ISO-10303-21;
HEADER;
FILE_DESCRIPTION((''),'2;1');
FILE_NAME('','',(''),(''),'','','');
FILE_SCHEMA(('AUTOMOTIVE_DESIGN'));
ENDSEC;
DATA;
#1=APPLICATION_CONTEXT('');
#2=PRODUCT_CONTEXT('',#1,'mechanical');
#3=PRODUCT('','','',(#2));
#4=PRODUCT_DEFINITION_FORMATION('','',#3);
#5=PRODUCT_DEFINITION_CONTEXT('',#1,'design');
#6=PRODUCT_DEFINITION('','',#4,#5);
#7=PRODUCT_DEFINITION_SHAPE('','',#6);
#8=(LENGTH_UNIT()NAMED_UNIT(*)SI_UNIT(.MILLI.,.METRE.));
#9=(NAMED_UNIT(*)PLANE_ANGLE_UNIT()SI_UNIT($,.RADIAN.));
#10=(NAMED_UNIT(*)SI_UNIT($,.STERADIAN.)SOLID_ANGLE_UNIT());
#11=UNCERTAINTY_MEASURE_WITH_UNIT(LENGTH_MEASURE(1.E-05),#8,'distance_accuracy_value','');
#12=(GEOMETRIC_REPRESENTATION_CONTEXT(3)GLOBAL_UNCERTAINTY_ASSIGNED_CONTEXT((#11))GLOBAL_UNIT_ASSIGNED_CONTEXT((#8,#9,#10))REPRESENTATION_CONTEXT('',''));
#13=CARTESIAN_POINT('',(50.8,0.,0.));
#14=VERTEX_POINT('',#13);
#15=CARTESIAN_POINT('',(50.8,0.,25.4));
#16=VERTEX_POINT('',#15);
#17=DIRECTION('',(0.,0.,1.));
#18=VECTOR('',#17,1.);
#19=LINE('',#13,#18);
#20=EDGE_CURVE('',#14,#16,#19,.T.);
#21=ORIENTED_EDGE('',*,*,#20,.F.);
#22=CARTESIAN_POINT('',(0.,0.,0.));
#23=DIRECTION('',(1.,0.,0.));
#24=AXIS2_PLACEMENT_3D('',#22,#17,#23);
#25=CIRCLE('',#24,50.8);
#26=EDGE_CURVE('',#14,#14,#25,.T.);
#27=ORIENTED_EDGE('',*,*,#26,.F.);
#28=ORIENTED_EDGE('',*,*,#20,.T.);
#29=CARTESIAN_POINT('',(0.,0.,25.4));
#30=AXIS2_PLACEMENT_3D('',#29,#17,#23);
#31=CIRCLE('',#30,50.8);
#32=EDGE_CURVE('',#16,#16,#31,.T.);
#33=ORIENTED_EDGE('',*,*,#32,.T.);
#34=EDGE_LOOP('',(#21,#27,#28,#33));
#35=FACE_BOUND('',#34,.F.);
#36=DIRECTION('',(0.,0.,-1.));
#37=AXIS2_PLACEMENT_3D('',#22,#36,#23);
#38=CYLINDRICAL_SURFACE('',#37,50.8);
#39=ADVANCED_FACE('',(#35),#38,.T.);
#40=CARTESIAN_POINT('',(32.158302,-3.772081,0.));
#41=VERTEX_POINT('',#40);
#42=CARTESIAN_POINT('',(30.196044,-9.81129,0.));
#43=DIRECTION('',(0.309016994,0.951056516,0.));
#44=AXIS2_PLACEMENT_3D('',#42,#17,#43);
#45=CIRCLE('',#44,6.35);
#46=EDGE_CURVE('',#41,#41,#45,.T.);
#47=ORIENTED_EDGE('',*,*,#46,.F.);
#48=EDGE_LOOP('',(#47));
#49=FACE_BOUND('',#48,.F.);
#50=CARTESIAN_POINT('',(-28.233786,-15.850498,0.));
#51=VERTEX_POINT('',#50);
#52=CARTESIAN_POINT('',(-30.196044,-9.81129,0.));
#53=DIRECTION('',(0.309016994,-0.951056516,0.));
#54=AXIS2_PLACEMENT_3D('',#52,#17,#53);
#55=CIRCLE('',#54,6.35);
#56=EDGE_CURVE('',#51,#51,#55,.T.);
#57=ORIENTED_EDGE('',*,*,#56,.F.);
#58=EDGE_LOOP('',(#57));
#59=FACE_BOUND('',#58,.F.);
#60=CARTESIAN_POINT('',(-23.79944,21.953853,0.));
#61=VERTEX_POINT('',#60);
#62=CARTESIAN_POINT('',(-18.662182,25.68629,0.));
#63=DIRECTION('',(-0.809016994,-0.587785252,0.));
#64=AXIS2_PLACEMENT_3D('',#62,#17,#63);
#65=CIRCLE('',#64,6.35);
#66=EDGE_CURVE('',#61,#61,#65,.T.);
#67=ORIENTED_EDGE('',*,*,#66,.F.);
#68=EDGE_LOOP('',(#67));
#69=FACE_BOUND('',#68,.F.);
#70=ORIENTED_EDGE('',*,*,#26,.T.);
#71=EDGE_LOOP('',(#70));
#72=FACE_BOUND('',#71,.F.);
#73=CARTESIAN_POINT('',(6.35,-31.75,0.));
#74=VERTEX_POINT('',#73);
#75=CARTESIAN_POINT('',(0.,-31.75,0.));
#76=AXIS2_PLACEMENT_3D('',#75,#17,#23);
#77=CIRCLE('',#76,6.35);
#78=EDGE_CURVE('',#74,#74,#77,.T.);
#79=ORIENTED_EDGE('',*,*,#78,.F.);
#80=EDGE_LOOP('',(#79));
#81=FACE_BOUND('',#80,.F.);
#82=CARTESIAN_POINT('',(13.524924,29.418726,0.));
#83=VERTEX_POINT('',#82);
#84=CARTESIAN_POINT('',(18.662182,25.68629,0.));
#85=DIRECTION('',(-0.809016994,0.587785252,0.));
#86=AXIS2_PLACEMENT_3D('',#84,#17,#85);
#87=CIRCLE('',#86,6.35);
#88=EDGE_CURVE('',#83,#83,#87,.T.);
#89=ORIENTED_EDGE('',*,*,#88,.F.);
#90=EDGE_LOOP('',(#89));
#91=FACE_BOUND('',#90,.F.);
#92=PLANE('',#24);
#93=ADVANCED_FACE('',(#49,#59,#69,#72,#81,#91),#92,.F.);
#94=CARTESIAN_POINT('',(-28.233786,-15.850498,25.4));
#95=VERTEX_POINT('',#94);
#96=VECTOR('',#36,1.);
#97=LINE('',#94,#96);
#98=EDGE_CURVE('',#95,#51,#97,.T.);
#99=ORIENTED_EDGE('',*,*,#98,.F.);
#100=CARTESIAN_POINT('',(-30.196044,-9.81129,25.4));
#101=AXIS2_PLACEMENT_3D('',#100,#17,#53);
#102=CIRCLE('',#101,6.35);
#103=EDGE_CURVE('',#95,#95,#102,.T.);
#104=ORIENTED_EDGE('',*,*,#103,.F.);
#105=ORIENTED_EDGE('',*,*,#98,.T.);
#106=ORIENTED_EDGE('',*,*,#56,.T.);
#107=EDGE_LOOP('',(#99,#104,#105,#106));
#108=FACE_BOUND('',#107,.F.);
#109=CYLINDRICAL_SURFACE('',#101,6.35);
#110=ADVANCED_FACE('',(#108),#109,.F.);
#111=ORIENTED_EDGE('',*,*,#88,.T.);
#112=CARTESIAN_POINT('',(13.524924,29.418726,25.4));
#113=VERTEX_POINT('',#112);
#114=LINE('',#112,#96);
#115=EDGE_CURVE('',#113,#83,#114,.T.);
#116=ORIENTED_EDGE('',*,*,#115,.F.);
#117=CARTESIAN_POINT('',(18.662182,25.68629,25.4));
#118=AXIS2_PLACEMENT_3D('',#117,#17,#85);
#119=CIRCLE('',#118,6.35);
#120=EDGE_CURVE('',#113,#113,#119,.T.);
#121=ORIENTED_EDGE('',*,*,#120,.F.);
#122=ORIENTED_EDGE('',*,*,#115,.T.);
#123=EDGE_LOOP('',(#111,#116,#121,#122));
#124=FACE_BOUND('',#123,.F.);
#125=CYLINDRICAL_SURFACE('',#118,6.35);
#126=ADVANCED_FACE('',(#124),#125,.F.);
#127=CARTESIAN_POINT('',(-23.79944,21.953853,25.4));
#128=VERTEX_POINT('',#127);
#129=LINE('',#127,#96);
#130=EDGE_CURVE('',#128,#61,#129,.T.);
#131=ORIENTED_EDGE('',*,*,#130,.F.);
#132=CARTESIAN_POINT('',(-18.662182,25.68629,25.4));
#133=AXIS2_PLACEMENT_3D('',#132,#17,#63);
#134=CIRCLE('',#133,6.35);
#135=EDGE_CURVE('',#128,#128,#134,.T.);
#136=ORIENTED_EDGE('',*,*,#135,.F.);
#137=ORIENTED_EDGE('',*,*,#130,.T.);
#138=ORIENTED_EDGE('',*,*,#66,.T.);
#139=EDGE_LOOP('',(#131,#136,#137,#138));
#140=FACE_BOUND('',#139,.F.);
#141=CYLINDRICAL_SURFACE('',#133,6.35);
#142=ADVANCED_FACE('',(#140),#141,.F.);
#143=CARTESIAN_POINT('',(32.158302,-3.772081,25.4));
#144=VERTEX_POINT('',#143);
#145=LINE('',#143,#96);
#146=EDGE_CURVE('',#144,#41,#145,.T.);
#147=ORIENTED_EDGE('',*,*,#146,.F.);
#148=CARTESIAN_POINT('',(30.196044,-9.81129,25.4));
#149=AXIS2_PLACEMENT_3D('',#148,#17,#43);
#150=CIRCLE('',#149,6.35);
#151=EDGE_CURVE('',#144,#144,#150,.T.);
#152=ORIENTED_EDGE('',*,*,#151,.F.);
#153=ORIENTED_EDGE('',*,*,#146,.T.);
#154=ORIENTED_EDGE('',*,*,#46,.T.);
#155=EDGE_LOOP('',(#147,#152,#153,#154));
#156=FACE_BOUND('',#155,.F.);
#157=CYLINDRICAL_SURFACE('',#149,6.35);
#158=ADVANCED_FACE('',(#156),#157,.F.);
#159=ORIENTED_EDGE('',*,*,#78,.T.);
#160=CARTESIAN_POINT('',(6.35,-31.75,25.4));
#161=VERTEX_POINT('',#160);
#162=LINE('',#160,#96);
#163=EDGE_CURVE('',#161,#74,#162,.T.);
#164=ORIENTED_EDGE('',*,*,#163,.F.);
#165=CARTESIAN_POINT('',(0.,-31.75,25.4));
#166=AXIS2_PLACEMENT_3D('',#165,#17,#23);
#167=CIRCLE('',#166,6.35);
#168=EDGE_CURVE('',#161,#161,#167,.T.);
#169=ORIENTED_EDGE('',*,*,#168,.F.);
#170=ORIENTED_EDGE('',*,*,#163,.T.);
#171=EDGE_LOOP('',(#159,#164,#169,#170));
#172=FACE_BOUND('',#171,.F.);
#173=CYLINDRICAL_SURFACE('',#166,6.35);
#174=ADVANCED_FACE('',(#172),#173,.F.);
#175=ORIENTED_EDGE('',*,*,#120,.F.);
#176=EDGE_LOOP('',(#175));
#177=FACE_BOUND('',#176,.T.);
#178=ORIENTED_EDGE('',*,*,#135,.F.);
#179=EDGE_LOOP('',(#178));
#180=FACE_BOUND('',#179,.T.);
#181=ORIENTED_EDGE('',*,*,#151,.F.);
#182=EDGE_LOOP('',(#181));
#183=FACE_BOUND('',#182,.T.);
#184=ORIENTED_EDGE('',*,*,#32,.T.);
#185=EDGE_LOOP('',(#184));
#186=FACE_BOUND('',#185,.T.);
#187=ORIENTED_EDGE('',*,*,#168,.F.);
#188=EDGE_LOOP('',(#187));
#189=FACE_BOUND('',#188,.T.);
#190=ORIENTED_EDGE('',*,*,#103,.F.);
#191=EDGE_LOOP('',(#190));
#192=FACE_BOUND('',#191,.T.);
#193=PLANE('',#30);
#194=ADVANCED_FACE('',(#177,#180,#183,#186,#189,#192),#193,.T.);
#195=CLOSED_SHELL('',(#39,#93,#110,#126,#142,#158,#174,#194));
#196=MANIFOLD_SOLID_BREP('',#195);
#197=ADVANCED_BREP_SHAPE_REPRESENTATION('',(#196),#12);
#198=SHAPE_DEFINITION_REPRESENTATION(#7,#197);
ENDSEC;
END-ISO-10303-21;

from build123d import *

# Parameters (mm, degrees)
F0_R            = 50.8
F1_DEPTH        = 25.4
F2_R            = 6.35
F4_DEPTH        = 25.401
F4_COPIES_COUNT = 5


# Not quite as in the source:
# - a pattern or mirror of a feature is missing from the dataset's text; its kind, count and spacing are read off the source's solid


with BuildPart() as f1:
    # F0 (on Top) → F1 (new body)
    with BuildSketch(Plane.XY):
        Circle(F0_R)
    extrude(amount=F1_DEPTH)

    # F2 (on face) → F4 (cut, through all)
    with BuildSketch(Plane.XY.offset(25.4)):
        with Locations((0, -31.75)):
            Circle(F2_R)
    f4 = extrude(amount=-F4_DEPTH, mode=Mode.SUBTRACT)

    # F4_copies: F4 ×5 about axis
    f4_copies_axis = Axis((0, 0, 0), (0, 0, 1))
    for i in range(1, F4_COPIES_COUNT):
        add(f4.rotate(f4_copies_axis, i * 360 / F4_COPIES_COUNT), mode=Mode.SUBTRACT)


solid = f1.part
